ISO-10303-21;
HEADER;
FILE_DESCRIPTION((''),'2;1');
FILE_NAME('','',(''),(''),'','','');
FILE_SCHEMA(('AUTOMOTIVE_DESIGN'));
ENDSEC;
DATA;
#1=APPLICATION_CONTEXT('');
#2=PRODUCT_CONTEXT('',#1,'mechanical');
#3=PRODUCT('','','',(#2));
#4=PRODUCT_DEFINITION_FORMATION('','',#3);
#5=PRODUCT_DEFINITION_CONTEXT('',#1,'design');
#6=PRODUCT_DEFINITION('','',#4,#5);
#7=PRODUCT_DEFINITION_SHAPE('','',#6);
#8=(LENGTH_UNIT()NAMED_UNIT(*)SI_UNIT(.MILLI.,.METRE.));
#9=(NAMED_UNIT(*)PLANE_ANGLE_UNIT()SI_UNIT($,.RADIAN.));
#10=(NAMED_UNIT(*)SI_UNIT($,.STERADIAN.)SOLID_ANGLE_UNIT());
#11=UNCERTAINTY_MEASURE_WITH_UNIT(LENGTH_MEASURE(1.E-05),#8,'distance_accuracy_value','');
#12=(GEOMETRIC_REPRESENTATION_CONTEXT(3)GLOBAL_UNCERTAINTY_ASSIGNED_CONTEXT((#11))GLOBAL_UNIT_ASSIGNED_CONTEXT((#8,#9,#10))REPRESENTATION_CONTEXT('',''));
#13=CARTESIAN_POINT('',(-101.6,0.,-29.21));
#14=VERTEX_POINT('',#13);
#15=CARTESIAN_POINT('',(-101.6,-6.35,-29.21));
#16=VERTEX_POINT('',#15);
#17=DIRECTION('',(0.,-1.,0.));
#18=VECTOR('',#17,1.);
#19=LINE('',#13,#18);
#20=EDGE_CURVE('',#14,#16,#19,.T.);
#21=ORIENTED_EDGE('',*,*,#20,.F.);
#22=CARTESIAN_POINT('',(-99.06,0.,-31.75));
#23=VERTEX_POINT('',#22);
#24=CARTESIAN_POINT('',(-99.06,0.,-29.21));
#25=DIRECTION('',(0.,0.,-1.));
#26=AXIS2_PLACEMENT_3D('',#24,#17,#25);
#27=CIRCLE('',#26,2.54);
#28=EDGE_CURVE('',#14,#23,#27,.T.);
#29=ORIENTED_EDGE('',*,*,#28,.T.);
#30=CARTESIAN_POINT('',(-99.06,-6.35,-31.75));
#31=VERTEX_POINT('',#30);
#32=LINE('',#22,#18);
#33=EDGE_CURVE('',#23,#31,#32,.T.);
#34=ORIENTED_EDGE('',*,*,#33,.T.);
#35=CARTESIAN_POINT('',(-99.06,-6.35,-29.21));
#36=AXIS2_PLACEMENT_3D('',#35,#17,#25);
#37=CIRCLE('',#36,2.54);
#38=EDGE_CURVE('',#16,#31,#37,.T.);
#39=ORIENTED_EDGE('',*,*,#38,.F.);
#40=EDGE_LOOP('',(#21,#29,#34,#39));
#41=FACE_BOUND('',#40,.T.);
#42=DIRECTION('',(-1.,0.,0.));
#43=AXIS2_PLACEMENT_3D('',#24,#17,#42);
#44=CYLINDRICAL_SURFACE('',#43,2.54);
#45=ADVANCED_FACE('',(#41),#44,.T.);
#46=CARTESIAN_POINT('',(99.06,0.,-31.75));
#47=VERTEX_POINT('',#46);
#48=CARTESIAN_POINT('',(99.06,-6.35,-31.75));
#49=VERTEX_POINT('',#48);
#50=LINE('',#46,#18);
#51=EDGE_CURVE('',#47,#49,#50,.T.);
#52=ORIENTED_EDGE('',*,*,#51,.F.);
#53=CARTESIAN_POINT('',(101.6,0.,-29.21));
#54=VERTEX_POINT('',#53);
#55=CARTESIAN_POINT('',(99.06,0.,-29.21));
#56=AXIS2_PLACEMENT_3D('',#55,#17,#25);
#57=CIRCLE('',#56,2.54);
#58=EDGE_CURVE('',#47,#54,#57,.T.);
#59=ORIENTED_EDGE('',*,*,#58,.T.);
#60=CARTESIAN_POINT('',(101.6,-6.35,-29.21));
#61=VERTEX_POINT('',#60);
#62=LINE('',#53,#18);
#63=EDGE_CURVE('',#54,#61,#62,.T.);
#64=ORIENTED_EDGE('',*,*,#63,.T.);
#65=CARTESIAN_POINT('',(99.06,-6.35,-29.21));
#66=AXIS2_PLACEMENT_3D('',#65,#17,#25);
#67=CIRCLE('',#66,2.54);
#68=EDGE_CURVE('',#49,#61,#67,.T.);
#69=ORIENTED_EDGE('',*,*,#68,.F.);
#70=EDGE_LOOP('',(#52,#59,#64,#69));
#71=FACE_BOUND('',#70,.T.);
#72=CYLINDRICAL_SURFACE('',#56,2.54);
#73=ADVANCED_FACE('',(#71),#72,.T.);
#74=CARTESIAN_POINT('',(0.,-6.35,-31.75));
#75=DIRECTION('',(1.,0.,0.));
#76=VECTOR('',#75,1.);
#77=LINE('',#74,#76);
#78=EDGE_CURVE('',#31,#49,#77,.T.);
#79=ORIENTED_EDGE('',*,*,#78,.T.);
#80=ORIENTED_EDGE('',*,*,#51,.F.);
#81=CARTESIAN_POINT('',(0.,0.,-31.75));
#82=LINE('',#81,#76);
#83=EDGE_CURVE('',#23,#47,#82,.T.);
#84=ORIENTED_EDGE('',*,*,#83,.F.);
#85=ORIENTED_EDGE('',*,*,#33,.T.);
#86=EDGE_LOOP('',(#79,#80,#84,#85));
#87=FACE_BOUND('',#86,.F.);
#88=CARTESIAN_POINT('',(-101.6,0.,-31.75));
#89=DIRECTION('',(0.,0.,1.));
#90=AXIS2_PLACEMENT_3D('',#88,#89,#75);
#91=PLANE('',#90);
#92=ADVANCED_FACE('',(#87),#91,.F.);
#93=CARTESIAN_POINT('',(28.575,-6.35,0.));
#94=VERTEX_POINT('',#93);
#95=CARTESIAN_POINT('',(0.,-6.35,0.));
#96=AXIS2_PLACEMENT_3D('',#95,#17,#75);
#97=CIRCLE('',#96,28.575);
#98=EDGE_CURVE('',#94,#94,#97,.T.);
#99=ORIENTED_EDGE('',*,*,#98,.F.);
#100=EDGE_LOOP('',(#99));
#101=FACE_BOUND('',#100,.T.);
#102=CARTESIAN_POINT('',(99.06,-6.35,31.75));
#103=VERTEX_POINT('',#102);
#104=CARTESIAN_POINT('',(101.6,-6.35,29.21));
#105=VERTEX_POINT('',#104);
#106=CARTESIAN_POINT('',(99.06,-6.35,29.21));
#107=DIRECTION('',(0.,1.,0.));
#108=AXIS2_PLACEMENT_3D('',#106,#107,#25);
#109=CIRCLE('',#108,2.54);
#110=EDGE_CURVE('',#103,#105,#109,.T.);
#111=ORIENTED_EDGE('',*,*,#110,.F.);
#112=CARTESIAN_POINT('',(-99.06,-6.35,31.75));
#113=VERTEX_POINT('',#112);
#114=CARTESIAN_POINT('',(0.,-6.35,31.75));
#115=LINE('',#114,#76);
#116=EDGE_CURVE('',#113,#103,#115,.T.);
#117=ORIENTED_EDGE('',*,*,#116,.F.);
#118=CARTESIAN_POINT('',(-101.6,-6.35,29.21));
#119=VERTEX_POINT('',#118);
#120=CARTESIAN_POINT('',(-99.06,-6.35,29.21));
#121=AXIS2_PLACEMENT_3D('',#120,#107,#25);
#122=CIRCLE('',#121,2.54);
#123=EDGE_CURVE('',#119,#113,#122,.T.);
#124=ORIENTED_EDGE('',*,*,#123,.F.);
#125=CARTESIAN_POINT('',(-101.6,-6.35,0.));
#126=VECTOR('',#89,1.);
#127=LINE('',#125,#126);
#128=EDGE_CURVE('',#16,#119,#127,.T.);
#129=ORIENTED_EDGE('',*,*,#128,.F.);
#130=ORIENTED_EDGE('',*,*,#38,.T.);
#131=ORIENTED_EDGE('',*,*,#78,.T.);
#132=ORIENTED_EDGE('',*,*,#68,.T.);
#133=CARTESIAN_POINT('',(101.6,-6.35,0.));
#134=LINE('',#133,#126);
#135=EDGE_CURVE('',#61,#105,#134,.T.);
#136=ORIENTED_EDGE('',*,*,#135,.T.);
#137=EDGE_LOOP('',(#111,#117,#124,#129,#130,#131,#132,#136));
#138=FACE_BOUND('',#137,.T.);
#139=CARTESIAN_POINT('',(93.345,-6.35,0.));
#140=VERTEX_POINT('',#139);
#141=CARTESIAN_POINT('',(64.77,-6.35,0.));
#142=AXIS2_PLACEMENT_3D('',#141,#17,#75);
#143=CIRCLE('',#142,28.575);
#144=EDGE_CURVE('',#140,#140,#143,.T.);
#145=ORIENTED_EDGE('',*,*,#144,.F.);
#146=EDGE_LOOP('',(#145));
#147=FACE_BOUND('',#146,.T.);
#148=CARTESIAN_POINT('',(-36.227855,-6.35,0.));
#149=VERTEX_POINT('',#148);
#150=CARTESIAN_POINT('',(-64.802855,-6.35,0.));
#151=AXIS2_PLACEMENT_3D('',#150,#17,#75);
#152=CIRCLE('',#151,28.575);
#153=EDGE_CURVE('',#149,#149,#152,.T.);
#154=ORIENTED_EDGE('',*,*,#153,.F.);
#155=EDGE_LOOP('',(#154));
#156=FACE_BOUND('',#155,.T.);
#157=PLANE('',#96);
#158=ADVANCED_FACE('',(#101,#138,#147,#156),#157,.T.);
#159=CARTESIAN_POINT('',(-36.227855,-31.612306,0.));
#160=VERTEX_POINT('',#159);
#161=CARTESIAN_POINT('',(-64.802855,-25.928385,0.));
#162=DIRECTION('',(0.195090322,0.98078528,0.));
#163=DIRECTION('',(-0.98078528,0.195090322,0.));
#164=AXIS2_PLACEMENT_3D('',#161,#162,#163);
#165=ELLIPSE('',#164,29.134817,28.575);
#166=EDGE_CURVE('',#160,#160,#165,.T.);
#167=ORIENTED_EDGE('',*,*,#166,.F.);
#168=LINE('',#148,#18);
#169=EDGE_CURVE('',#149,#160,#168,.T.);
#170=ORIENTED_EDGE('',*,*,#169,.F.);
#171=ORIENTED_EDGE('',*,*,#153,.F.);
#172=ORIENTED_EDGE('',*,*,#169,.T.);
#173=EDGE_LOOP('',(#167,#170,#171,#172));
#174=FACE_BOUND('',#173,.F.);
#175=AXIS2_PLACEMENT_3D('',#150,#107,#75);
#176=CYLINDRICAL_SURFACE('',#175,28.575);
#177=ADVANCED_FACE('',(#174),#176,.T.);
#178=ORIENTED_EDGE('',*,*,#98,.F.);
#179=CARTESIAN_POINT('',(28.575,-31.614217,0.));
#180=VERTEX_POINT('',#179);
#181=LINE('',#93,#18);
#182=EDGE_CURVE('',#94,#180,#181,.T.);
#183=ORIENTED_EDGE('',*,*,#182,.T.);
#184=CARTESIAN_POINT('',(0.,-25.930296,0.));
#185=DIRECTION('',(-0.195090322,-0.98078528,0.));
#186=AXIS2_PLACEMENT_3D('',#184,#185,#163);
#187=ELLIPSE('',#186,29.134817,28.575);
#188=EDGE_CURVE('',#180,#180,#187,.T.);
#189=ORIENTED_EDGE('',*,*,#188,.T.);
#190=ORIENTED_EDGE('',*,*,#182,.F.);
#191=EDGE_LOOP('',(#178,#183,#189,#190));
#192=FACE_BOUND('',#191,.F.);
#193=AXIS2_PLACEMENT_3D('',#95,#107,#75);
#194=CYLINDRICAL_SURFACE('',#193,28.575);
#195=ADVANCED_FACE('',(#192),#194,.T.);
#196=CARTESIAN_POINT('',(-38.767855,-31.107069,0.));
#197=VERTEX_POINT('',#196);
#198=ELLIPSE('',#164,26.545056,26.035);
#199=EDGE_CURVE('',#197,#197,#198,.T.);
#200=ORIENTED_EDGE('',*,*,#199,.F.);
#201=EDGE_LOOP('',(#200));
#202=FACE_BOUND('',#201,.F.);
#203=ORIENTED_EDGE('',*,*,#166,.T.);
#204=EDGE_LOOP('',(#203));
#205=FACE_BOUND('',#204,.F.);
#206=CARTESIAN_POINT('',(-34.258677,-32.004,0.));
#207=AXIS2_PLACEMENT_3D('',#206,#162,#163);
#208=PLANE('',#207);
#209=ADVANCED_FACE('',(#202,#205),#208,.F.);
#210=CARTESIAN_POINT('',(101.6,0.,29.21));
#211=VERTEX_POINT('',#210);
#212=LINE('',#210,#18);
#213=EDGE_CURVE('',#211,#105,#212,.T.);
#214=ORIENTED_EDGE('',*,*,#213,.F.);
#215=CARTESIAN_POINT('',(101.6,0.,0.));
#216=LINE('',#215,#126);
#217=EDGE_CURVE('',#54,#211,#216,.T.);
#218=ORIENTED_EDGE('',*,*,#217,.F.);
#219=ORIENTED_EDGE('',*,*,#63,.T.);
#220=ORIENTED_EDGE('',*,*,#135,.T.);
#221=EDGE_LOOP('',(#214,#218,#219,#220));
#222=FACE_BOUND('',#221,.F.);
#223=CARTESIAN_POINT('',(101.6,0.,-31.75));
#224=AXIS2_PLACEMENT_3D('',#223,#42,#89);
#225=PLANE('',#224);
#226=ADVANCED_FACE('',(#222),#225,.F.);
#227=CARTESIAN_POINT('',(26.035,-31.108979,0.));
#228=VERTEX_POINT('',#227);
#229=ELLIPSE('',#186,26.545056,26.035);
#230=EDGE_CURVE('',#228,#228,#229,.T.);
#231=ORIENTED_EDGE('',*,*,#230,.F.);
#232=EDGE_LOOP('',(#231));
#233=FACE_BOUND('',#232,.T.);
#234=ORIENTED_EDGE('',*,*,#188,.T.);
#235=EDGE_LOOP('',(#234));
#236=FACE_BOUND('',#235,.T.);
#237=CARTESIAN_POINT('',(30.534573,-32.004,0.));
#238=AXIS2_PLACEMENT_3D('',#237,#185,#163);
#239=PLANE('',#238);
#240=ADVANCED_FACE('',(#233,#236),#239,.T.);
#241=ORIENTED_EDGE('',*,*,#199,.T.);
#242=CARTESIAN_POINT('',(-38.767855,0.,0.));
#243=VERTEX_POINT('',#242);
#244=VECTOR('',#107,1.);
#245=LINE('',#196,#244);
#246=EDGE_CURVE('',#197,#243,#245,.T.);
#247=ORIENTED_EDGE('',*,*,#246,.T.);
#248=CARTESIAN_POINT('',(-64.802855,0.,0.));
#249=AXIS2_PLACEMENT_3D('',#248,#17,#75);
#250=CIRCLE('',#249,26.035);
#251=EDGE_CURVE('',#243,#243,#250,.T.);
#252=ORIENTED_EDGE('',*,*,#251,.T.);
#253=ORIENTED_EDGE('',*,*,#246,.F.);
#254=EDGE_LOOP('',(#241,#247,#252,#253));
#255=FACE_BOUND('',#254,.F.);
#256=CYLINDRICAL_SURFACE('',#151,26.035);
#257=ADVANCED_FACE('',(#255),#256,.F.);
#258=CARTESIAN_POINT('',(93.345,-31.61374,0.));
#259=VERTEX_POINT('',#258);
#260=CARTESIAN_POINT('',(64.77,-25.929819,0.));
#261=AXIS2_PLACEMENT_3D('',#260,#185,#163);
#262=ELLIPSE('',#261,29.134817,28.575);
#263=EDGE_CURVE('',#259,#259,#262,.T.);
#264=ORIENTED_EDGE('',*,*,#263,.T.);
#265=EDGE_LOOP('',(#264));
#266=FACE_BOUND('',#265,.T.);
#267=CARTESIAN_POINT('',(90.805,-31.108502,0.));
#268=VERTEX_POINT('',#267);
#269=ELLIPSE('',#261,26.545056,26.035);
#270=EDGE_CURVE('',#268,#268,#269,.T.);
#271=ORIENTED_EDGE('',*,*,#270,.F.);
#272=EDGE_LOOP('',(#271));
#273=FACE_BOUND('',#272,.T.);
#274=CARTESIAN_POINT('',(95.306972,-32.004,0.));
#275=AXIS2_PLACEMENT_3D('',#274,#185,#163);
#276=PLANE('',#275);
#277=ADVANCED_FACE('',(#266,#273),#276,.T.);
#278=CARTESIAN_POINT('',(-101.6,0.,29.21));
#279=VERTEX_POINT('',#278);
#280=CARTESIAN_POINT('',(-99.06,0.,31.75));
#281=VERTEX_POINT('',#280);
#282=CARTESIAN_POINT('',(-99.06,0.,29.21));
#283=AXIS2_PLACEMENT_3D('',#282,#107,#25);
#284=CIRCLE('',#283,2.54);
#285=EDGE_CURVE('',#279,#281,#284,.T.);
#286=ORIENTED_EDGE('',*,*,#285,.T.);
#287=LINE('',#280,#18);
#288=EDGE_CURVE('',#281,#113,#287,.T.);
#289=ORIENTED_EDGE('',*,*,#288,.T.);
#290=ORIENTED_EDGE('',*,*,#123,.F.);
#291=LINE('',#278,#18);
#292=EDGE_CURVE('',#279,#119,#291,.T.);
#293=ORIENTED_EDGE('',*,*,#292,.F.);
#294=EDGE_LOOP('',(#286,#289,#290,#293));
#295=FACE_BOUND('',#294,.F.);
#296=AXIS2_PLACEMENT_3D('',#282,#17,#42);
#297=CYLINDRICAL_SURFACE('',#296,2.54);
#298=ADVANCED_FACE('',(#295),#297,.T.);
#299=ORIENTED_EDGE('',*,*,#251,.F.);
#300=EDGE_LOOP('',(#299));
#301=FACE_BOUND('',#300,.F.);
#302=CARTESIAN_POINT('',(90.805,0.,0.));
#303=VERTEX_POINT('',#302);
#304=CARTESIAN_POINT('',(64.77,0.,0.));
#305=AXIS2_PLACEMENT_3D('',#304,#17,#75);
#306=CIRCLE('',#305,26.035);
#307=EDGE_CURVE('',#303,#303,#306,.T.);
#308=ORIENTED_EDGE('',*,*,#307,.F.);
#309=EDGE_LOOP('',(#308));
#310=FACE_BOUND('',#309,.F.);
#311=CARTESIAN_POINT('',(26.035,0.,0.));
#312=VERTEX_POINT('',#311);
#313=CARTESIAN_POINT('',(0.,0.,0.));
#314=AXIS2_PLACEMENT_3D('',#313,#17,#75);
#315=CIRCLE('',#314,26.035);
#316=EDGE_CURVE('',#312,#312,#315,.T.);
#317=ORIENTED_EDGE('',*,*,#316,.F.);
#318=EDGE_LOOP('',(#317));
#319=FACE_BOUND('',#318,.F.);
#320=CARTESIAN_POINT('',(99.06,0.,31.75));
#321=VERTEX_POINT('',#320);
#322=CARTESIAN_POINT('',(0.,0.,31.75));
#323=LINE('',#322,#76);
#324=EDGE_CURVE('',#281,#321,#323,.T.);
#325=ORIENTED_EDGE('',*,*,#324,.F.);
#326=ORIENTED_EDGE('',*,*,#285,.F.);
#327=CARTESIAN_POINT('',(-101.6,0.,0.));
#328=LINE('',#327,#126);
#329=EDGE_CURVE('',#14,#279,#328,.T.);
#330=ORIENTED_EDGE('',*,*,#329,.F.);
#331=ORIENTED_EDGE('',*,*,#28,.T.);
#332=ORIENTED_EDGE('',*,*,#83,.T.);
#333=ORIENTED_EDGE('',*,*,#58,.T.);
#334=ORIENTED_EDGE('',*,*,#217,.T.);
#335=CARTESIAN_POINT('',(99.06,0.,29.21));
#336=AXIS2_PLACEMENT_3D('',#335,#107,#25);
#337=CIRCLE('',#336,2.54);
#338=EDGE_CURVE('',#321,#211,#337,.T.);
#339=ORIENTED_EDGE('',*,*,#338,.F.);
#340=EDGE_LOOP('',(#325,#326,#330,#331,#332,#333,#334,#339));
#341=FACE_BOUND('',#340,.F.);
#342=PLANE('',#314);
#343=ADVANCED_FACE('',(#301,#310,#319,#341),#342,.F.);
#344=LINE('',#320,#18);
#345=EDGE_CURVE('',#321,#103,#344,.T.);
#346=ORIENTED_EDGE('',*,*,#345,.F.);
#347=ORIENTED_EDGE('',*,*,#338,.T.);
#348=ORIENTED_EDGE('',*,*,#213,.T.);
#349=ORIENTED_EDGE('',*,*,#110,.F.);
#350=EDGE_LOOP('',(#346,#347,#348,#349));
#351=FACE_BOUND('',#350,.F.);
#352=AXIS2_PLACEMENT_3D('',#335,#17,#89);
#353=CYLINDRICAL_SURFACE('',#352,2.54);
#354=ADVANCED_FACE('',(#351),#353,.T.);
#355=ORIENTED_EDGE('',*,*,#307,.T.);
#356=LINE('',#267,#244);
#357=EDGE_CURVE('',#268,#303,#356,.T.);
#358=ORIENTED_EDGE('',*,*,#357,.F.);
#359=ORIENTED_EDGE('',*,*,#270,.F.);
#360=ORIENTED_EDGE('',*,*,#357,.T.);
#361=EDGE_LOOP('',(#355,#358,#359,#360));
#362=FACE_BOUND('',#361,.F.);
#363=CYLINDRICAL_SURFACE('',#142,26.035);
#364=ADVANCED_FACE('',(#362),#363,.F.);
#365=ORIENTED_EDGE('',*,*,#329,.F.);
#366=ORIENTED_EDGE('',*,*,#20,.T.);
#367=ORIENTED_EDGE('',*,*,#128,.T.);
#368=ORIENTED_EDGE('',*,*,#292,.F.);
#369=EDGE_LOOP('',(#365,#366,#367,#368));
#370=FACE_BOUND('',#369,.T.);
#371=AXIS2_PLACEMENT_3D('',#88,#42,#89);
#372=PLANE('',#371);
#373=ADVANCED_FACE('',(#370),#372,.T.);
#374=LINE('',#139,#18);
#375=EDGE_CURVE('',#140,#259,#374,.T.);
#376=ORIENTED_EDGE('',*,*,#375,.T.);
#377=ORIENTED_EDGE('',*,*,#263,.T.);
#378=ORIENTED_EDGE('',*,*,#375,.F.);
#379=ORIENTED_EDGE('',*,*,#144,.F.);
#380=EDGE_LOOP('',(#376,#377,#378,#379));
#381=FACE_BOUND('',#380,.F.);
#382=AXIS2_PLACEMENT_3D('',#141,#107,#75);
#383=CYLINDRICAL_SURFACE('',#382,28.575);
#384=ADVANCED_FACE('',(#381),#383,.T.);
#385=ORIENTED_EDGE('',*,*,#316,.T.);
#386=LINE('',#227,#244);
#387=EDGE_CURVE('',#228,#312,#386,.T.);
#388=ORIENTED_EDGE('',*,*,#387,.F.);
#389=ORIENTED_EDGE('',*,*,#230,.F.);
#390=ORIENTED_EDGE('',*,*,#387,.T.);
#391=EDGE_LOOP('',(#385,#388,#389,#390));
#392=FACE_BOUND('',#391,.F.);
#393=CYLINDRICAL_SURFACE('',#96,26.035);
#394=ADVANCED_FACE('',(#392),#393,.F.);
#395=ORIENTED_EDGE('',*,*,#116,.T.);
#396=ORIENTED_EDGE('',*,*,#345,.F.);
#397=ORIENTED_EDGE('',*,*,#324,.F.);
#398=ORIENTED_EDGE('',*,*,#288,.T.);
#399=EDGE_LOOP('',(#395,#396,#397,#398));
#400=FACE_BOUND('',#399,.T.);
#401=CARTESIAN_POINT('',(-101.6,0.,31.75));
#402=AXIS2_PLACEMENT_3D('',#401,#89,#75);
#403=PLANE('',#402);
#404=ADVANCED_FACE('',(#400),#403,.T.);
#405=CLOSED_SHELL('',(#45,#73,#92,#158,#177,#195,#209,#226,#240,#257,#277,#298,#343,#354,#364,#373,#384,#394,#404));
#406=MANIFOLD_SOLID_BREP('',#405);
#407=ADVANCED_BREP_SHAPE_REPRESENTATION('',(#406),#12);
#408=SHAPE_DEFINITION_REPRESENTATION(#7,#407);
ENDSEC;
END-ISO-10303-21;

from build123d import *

# Parameters (mm, degrees)
F0_W     = 203.2
F0_H     = 63.5
F1_DEPTH = 6.35
F2_R     = 26.035
F3_DEPTH = 12.7
F4_R     = 28.575
F4_R_2   = 26.035
F5_DEPTH = 25.4
F7_DEPTH = 31.75
F8_R     = 2.54


# Not quite as in the source:
# - a feature names something its author has since deleted; it is built from what else it names


with BuildPart() as f1:
    # F0 (on Front) → F1 (new body)
    with BuildSketch(Plane.XZ):
        Rectangle(F0_W, F0_H)
    extrude(amount=F1_DEPTH)

    # F2 (on face) → F3 (cut)
    with BuildSketch(Plane.XZ.offset(6.35)):
        with Locations((-64.8028552532, 0)):
            Circle(F2_R)
        Circle(F2_R)
        with Locations((64.77, 0)):
            Circle(F2_R)
    extrude(amount=-F3_DEPTH, mode=Mode.SUBTRACT)

    # F4 (on face) → F5 (join)
    with BuildSketch(Plane.XZ.offset(6.35)):
        with Locations((-64.8028552532, 0)):
            Circle(F4_R)
        with Locations((-64.8028552532, 0)):
            Circle(F4_R_2, mode=Mode.SUBTRACT)
        Circle(F4_R)
        Circle(F4_R_2, mode=Mode.SUBTRACT)
        with Locations((64.77, 0)):
            Circle(F4_R)
        with Locations((64.77, 0)):
            Circle(F4_R_2, mode=Mode.SUBTRACT)
    extrude(amount=F5_DEPTH)

    # F6 (on Top) → F7 (cut, symmetric)
    with BuildSketch(Plane.XY):
        Polygon((35.6169715524, -20.1309207911), (35.6169715524, -32.004), (95.3069715524, -32.004), align=None)
        Polygon((-29.1554266587, -20.1309207911), (-29.1554266587, -32.004), (30.5345733413, -32.004), align=None)
        Polygon((-93.9486771822, -20.1309207911), (-93.9486771822, -32.004), (-34.2586771822, -32.004), align=None)
    extrude(amount=F7_DEPTH, both=True, mode=Mode.SUBTRACT)

    # F8
    f8_edges = [f1.edges().sort_by_distance(p)[0] for p in [
        (-101.6, -3.175, -31.75),
        (-101.6, -3.175, 31.75),
        (101.6, -3.175, 31.75),
        (101.6, -3.175, -31.75),
    ]]
    fillet(f8_edges, radius=F8_R)


solid = f1.part
